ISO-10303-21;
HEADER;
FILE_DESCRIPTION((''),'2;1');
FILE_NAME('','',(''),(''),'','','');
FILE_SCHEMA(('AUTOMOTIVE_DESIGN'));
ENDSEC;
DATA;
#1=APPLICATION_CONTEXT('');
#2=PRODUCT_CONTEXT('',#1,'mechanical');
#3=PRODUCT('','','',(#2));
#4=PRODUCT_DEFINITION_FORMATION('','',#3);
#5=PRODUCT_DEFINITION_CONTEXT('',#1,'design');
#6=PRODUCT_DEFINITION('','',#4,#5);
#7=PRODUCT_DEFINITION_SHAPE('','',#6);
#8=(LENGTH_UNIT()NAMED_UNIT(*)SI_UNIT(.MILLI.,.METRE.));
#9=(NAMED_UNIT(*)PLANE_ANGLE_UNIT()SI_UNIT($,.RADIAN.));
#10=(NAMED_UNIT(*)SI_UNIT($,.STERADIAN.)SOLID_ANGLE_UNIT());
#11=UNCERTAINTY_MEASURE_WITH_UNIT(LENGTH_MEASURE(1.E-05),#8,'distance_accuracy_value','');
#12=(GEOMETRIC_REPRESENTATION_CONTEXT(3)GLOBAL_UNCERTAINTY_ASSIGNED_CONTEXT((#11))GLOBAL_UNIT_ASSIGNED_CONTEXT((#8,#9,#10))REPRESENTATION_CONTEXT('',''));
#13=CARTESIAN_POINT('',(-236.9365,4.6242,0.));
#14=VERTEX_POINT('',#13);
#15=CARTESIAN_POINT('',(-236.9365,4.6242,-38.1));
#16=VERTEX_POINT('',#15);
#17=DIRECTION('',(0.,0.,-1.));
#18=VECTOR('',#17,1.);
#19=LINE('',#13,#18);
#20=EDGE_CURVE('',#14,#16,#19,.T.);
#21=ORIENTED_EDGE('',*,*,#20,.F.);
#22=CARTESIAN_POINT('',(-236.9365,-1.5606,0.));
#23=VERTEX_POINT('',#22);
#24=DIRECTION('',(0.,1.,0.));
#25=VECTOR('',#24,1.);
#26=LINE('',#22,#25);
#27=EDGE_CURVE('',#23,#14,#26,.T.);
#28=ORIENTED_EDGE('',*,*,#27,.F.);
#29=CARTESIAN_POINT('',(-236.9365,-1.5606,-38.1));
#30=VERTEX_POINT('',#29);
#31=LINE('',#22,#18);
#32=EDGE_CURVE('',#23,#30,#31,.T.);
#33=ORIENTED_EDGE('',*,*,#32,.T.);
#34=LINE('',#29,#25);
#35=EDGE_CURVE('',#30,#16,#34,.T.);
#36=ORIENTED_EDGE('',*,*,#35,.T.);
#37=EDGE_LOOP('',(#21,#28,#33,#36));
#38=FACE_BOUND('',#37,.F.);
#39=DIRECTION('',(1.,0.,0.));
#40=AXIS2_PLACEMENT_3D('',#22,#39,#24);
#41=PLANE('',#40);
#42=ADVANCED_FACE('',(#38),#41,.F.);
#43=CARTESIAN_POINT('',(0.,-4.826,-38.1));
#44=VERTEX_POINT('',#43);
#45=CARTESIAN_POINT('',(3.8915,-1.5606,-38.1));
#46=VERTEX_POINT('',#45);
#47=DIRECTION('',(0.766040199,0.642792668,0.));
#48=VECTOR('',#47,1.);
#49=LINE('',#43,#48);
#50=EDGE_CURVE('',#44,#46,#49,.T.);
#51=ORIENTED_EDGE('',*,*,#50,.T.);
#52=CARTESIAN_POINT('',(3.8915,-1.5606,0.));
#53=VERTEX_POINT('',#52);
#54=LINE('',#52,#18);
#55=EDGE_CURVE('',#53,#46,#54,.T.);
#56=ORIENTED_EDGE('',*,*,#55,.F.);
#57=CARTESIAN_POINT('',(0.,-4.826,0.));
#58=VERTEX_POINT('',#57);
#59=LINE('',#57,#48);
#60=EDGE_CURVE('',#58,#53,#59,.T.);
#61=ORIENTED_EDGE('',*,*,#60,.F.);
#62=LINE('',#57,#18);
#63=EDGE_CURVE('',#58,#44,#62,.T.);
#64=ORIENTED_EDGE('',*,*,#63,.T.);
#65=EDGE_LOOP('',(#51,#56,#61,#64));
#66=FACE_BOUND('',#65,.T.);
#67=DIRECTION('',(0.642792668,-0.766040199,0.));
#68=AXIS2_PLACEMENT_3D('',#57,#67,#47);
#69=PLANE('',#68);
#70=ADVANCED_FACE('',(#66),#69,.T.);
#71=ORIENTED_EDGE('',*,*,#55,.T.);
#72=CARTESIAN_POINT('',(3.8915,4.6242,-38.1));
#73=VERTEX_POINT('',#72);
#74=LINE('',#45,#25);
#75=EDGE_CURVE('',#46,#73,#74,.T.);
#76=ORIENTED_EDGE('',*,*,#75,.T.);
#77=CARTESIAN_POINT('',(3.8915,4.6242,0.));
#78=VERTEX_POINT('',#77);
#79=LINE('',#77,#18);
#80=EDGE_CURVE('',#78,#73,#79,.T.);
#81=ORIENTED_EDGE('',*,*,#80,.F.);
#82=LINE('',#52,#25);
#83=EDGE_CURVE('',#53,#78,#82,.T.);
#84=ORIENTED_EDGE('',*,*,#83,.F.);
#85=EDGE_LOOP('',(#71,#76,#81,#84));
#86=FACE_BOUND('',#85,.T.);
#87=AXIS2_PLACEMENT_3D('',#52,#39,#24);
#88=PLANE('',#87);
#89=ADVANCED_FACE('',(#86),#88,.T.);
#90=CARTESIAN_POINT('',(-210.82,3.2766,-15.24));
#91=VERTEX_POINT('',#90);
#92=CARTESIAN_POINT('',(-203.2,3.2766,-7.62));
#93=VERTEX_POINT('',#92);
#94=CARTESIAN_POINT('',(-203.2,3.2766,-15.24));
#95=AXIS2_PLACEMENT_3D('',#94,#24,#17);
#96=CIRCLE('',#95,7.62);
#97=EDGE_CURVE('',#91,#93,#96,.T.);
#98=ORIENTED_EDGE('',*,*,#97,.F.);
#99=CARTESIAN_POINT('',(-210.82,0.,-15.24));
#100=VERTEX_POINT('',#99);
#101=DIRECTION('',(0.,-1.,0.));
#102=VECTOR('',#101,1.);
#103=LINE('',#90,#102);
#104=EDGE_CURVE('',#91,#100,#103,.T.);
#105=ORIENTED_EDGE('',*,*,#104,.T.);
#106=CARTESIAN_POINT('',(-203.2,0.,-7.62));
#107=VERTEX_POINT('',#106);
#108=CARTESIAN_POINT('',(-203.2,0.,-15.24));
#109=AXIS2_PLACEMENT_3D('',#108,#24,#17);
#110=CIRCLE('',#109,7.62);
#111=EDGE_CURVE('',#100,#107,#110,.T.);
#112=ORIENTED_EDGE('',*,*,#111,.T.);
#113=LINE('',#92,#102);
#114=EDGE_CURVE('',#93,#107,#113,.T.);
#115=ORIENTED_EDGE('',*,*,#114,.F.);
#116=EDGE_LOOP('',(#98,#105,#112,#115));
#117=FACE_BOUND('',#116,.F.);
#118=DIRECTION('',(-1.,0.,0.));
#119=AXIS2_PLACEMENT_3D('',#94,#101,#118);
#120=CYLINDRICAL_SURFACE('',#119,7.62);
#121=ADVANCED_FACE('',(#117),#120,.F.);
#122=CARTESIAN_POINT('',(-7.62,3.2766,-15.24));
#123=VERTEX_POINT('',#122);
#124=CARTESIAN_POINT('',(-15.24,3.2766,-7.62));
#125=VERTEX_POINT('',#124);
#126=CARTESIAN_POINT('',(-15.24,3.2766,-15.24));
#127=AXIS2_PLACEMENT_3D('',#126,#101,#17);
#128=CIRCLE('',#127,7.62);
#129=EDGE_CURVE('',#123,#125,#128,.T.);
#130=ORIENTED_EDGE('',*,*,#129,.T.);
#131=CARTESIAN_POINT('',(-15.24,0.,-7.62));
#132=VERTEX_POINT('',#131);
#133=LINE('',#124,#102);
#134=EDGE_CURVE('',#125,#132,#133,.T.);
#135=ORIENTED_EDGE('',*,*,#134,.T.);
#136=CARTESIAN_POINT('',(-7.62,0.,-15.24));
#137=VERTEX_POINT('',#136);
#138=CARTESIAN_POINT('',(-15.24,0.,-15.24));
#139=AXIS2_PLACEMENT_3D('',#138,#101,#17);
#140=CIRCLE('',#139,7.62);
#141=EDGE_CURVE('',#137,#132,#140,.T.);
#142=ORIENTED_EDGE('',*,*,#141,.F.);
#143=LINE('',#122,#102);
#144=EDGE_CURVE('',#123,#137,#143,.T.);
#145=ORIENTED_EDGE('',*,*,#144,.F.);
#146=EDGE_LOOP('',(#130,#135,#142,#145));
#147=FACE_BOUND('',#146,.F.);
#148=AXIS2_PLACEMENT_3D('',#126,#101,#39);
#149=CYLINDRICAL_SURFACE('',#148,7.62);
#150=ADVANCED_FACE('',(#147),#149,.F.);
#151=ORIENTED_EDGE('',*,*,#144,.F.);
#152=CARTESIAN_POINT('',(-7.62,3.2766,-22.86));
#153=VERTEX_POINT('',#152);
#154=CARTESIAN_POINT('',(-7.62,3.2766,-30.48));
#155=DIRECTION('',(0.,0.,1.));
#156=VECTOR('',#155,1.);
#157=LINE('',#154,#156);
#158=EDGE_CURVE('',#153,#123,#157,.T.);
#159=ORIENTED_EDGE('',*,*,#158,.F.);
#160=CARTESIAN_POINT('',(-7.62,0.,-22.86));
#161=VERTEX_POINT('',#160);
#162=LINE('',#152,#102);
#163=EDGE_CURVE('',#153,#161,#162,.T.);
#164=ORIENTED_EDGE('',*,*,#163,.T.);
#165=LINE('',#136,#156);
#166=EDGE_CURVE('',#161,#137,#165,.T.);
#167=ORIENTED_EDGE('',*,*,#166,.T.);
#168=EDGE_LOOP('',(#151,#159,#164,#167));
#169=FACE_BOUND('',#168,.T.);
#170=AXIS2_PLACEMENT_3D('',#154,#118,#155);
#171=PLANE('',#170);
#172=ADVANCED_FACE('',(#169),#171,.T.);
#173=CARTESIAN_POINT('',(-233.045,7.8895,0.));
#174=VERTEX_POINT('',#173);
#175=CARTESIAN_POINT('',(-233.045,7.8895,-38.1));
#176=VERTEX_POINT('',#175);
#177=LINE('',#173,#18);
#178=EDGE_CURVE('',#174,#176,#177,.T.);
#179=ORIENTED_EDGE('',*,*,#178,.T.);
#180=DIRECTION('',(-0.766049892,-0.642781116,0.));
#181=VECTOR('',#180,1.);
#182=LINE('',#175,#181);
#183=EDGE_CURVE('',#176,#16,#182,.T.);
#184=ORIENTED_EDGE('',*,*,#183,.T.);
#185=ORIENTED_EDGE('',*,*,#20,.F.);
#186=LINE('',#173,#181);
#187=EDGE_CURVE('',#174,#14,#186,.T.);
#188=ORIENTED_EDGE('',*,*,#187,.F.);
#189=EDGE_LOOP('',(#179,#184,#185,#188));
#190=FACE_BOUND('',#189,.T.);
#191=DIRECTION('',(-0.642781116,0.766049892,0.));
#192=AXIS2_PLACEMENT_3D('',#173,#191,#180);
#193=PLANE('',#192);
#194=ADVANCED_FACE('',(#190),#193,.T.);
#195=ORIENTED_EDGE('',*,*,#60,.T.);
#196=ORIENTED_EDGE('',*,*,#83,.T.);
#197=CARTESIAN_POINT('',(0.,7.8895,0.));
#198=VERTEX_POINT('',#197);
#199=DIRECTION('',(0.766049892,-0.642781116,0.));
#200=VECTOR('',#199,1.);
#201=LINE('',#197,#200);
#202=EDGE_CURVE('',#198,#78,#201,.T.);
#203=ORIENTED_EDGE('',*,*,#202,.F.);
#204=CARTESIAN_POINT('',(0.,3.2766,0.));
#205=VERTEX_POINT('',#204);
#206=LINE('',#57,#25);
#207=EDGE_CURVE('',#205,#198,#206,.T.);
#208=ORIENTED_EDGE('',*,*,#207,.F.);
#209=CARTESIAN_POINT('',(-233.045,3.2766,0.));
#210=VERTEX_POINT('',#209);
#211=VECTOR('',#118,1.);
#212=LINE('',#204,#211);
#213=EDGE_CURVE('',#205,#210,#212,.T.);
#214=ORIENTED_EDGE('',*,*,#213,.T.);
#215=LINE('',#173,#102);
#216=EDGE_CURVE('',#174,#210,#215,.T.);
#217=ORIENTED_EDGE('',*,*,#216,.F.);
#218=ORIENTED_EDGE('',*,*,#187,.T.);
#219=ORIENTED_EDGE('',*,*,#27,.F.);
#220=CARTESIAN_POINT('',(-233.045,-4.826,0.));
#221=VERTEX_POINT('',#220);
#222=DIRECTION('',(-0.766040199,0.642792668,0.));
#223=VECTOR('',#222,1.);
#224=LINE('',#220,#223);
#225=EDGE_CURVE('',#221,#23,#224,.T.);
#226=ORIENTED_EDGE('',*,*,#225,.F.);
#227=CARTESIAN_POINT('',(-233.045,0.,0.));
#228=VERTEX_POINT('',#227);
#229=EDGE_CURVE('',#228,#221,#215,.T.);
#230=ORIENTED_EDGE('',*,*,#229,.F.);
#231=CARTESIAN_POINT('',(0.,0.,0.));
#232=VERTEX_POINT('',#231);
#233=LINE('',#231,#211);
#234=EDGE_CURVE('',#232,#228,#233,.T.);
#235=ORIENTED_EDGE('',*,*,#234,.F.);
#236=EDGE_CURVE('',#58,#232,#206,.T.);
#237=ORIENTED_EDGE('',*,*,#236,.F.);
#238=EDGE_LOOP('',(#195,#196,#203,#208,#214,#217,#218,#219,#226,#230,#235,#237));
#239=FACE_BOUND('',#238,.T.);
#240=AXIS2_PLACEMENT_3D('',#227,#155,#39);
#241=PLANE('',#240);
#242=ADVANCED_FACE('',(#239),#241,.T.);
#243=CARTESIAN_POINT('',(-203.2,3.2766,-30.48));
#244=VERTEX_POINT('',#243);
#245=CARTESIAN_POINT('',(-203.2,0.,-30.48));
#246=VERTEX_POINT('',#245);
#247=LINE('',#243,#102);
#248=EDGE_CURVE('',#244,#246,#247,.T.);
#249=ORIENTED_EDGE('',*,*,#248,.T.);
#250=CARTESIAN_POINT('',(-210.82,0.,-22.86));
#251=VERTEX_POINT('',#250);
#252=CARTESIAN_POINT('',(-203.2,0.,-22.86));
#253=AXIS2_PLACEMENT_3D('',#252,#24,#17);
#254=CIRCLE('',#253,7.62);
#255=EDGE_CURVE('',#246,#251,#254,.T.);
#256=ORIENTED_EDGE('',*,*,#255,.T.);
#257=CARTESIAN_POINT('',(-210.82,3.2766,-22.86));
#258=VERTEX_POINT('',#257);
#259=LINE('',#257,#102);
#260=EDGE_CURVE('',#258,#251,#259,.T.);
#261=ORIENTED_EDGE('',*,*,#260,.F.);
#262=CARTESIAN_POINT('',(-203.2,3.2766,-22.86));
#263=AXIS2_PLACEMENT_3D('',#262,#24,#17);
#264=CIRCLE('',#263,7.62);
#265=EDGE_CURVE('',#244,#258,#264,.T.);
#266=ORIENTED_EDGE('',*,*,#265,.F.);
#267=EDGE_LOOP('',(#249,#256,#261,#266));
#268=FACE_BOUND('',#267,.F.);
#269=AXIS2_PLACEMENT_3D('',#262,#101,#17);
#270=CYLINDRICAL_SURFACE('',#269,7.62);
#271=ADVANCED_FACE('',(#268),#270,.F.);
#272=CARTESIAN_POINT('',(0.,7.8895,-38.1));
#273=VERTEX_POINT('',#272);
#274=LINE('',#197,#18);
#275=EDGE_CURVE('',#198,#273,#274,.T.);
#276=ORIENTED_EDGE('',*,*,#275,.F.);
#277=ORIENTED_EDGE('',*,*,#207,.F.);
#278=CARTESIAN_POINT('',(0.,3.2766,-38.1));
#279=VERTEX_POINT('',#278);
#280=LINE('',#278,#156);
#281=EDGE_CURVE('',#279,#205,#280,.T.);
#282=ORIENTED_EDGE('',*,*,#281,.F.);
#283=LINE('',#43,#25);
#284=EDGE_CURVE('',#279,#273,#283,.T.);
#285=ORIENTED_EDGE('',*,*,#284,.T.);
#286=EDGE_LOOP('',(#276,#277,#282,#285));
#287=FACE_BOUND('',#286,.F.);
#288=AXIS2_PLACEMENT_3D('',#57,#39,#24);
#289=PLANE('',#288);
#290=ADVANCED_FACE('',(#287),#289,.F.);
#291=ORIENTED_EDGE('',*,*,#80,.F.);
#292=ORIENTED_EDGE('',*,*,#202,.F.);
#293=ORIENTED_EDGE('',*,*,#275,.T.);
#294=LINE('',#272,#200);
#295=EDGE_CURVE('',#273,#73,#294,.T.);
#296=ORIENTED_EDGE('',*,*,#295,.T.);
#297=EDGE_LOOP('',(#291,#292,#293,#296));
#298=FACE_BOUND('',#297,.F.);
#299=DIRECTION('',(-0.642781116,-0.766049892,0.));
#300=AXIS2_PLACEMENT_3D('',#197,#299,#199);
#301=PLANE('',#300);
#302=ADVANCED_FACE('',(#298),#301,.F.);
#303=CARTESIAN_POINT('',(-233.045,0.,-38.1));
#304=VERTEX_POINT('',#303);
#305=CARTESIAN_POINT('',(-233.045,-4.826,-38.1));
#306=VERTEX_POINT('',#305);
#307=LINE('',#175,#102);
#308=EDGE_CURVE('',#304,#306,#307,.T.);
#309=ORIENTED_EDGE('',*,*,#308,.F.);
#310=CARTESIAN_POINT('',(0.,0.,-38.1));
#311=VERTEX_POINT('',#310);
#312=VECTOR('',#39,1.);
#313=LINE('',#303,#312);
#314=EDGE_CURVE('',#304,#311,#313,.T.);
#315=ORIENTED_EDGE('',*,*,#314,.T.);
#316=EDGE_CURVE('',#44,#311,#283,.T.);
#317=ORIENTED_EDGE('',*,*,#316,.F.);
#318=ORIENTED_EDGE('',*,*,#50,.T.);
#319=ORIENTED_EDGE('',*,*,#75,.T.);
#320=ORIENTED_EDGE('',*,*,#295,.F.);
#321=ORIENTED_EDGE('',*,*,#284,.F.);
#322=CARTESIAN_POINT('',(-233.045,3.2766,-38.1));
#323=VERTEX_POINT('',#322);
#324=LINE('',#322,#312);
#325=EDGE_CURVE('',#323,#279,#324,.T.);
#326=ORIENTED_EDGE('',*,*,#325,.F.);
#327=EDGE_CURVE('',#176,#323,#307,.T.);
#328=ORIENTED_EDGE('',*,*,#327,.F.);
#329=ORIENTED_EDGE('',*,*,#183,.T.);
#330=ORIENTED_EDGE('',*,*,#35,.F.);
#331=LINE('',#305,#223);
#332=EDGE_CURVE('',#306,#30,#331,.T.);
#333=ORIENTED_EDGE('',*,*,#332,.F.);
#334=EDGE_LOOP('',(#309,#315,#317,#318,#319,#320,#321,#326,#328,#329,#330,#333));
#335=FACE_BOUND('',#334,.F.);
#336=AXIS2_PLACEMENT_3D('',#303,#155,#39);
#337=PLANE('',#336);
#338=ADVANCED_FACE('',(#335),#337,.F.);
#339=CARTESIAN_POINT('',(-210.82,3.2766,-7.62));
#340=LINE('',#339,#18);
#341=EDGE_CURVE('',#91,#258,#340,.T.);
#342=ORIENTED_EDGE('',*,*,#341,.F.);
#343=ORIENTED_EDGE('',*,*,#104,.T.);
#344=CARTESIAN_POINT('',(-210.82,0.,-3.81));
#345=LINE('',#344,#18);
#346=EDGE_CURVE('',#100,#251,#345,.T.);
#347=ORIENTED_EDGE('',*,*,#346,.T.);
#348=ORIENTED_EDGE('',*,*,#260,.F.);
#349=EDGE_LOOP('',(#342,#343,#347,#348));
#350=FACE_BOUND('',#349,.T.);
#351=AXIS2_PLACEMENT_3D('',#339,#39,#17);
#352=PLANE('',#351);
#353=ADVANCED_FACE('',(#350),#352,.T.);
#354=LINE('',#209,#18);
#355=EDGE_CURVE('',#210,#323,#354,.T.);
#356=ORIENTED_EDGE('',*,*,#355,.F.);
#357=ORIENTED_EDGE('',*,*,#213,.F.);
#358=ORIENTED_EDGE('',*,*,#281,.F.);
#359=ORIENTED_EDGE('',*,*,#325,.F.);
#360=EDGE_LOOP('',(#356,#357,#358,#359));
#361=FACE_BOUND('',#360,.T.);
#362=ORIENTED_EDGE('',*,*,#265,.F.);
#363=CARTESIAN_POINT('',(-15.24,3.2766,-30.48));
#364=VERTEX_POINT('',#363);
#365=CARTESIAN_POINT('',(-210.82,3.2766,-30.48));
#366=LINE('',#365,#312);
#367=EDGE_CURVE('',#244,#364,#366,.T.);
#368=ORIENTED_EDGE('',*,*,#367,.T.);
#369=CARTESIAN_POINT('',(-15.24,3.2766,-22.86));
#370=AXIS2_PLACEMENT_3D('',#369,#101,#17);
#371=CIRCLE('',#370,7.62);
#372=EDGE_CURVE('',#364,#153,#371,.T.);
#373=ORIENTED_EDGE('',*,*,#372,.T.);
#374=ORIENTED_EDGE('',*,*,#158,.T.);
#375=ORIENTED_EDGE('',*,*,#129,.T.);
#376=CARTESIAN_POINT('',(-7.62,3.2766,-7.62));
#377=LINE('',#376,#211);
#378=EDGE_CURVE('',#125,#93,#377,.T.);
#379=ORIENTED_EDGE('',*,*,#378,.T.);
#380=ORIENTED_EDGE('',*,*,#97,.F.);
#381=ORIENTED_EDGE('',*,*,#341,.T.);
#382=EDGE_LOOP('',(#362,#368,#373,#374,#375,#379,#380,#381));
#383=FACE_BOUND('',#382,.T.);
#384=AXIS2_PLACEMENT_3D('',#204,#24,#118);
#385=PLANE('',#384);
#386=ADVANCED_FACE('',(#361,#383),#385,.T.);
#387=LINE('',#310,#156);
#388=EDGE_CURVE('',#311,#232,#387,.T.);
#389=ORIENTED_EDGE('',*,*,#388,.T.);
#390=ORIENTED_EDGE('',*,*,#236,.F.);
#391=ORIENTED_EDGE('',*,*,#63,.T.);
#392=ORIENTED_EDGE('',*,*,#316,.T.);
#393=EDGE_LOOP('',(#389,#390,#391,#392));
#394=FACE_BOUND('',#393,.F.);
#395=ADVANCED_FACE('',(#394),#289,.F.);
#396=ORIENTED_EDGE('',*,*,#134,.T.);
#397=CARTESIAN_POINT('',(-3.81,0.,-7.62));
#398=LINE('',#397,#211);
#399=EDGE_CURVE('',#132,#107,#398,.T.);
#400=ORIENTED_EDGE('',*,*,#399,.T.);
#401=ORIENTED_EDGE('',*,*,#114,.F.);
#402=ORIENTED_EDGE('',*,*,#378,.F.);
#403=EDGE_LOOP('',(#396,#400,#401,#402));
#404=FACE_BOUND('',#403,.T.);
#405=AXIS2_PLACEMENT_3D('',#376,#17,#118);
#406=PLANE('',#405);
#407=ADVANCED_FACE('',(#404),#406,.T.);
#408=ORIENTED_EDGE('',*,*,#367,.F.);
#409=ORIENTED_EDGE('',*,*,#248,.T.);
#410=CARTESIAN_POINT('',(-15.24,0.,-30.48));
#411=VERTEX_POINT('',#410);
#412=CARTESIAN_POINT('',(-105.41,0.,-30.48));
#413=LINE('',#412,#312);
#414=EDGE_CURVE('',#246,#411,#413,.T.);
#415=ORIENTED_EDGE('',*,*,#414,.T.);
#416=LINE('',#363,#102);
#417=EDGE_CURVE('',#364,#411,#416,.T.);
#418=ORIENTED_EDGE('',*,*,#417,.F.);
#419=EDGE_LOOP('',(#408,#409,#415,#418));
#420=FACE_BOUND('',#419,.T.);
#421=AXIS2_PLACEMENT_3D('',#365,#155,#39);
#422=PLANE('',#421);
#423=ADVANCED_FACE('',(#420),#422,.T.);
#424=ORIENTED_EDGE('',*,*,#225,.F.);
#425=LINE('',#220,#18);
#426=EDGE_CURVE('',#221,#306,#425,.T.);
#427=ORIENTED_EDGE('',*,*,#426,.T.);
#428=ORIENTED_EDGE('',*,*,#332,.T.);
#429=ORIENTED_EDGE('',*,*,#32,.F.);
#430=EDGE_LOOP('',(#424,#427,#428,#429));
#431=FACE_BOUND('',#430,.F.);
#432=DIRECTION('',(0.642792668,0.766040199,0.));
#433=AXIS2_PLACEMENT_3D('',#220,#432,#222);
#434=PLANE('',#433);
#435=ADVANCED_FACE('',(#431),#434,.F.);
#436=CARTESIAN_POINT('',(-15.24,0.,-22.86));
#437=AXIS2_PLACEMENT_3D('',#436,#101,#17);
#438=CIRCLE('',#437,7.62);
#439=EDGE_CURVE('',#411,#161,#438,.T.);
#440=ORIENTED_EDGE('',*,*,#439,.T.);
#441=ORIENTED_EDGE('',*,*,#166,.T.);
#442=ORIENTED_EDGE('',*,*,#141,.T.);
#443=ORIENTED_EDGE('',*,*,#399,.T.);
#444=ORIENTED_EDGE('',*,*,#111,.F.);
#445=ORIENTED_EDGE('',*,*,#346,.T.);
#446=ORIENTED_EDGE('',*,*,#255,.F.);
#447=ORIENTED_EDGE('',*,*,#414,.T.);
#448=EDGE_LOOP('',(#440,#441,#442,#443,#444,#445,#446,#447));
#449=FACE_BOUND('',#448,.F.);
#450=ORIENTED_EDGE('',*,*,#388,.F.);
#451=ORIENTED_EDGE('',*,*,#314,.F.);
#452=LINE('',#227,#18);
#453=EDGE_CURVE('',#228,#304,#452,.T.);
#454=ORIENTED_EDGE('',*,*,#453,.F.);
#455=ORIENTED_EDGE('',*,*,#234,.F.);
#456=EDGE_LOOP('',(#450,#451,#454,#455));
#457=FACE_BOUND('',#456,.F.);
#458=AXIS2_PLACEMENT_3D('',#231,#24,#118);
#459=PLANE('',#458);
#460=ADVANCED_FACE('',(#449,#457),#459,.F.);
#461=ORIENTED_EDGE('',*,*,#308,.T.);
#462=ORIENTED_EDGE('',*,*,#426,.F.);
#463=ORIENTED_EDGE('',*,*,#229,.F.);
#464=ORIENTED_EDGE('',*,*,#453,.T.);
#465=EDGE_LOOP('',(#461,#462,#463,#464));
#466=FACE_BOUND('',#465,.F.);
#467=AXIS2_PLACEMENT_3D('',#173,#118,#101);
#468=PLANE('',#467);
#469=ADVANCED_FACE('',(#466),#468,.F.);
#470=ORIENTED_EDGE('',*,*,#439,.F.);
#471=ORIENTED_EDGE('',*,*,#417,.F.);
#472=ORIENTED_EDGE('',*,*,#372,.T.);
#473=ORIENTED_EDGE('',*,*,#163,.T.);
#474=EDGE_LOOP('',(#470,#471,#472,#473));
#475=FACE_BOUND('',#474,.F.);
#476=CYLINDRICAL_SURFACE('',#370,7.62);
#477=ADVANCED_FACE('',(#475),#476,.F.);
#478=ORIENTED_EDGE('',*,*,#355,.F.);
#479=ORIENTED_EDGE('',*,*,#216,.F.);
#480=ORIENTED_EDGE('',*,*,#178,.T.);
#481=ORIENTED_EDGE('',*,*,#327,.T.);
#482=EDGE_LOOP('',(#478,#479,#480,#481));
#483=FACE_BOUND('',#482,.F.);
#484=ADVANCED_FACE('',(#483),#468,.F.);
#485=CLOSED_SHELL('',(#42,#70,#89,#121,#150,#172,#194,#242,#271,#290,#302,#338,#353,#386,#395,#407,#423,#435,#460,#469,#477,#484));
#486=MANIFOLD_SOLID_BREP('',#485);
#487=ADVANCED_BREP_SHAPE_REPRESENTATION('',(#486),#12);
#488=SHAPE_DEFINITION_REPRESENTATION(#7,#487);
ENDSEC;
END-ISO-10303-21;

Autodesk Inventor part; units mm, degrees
ref_plane "YZ Plane" through (0, 0, 0) normal (1, 0, 0) x (0, 1, 0)
ref_plane "XZ Plane" through (0, 0, 0) normal (0, 1, 0) x (-1, 0, 0)
ref_plane "XY Plane" through (0, 0, 0) normal (0, 0, 1) x (1, 0, 0)
sketch "Sketch1" plane through (0, 0, 0) normal (0, 1, 0) x (-1, 0, 0)
  line L0 (0, 0) -> (233.045, 0)
  line L1 (233.045, 0) -> (233.045, -38.1)
  line L2 (233.045, -38.1) -> (0, -38.1)
  line L3 (0, -38.1) -> (0, 0)
  dimension "d0" = 233.045
  dimension "d1" = 38.1
extrude "Extrusion1" add sketch "Sketch1" along normal blind 3.2766
sketch "Sketch2" plane through (0, 3.2766, 0) normal (0, 1, 0) x (1, 0, 0)
  line L0 (-7.62, 7.62) -> (-210.82, 7.62)
  line L1 (-210.82, 7.62) -> (-210.82, 30.48)
  line L2 (-210.82, 30.48) -> (-7.62, 30.48)
  line L3 (-7.62, 30.48) -> (-7.62, 7.62)
  point P0 (0, 0)
  dimension "d4" = 203.2
  dimension "d5" = 22.86
extrude "Extrusion2" cut sketch "Sketch2" against normal through all
fillet "Face Fillet1" radius 7.62 1 edges at (-210.82, 1.6383, -30.48)
fillet "Face Fillet2" radius 7.62 1 edges at (-210.82, 1.6383, -7.62)
fillet "Face Fillet3" radius 7.62 1 edges at (-7.62, 1.6383, -30.48)
fillet "Face Fillet4" radius 7.62 1 edges at (-7.62, 1.6383, -7.62)
sketch "Sketch3" plane through (-233.045, 0, 0) normal (0, 0, 1) x (1, 0, 0)
  line L0 (233.045, -4.826) -> (233.045, 7.8895)
  line L1 (233.045, 7.8895) -> (236.9365, 4.6242)
  line L2 (233.045, -4.826) -> (236.9365, -1.5606)
  line L3 (233.045, -4.826) -> (238.125, -4.826) construction
  line L4 (236.9365, -1.5606) -> (236.9365, 4.6242)
  line L5 (0, 7.8895) -> (0, -4.826)
  line L6 (0, -4.826) -> (-3.8915, -1.5606)
  line L7 (0, 7.8895) -> (-3.8915, 4.6242)
  line L8 (-3.8915, -1.5606) -> (-3.8915, 4.6242)
  point P0 (233.045, 0)
  dimension "d12" = 5.08
  dimension "d13" = 50
  dimension "d14" = 5.08
  dimension "d15" = 40
  dimension "d16" = 5.08
  dimension "d17" = 50
  dimension "d18" = 5.08
extrude "Extrusion3" add sketch "Sketch3" against normal blind 38.1
properties part number "short slider"
